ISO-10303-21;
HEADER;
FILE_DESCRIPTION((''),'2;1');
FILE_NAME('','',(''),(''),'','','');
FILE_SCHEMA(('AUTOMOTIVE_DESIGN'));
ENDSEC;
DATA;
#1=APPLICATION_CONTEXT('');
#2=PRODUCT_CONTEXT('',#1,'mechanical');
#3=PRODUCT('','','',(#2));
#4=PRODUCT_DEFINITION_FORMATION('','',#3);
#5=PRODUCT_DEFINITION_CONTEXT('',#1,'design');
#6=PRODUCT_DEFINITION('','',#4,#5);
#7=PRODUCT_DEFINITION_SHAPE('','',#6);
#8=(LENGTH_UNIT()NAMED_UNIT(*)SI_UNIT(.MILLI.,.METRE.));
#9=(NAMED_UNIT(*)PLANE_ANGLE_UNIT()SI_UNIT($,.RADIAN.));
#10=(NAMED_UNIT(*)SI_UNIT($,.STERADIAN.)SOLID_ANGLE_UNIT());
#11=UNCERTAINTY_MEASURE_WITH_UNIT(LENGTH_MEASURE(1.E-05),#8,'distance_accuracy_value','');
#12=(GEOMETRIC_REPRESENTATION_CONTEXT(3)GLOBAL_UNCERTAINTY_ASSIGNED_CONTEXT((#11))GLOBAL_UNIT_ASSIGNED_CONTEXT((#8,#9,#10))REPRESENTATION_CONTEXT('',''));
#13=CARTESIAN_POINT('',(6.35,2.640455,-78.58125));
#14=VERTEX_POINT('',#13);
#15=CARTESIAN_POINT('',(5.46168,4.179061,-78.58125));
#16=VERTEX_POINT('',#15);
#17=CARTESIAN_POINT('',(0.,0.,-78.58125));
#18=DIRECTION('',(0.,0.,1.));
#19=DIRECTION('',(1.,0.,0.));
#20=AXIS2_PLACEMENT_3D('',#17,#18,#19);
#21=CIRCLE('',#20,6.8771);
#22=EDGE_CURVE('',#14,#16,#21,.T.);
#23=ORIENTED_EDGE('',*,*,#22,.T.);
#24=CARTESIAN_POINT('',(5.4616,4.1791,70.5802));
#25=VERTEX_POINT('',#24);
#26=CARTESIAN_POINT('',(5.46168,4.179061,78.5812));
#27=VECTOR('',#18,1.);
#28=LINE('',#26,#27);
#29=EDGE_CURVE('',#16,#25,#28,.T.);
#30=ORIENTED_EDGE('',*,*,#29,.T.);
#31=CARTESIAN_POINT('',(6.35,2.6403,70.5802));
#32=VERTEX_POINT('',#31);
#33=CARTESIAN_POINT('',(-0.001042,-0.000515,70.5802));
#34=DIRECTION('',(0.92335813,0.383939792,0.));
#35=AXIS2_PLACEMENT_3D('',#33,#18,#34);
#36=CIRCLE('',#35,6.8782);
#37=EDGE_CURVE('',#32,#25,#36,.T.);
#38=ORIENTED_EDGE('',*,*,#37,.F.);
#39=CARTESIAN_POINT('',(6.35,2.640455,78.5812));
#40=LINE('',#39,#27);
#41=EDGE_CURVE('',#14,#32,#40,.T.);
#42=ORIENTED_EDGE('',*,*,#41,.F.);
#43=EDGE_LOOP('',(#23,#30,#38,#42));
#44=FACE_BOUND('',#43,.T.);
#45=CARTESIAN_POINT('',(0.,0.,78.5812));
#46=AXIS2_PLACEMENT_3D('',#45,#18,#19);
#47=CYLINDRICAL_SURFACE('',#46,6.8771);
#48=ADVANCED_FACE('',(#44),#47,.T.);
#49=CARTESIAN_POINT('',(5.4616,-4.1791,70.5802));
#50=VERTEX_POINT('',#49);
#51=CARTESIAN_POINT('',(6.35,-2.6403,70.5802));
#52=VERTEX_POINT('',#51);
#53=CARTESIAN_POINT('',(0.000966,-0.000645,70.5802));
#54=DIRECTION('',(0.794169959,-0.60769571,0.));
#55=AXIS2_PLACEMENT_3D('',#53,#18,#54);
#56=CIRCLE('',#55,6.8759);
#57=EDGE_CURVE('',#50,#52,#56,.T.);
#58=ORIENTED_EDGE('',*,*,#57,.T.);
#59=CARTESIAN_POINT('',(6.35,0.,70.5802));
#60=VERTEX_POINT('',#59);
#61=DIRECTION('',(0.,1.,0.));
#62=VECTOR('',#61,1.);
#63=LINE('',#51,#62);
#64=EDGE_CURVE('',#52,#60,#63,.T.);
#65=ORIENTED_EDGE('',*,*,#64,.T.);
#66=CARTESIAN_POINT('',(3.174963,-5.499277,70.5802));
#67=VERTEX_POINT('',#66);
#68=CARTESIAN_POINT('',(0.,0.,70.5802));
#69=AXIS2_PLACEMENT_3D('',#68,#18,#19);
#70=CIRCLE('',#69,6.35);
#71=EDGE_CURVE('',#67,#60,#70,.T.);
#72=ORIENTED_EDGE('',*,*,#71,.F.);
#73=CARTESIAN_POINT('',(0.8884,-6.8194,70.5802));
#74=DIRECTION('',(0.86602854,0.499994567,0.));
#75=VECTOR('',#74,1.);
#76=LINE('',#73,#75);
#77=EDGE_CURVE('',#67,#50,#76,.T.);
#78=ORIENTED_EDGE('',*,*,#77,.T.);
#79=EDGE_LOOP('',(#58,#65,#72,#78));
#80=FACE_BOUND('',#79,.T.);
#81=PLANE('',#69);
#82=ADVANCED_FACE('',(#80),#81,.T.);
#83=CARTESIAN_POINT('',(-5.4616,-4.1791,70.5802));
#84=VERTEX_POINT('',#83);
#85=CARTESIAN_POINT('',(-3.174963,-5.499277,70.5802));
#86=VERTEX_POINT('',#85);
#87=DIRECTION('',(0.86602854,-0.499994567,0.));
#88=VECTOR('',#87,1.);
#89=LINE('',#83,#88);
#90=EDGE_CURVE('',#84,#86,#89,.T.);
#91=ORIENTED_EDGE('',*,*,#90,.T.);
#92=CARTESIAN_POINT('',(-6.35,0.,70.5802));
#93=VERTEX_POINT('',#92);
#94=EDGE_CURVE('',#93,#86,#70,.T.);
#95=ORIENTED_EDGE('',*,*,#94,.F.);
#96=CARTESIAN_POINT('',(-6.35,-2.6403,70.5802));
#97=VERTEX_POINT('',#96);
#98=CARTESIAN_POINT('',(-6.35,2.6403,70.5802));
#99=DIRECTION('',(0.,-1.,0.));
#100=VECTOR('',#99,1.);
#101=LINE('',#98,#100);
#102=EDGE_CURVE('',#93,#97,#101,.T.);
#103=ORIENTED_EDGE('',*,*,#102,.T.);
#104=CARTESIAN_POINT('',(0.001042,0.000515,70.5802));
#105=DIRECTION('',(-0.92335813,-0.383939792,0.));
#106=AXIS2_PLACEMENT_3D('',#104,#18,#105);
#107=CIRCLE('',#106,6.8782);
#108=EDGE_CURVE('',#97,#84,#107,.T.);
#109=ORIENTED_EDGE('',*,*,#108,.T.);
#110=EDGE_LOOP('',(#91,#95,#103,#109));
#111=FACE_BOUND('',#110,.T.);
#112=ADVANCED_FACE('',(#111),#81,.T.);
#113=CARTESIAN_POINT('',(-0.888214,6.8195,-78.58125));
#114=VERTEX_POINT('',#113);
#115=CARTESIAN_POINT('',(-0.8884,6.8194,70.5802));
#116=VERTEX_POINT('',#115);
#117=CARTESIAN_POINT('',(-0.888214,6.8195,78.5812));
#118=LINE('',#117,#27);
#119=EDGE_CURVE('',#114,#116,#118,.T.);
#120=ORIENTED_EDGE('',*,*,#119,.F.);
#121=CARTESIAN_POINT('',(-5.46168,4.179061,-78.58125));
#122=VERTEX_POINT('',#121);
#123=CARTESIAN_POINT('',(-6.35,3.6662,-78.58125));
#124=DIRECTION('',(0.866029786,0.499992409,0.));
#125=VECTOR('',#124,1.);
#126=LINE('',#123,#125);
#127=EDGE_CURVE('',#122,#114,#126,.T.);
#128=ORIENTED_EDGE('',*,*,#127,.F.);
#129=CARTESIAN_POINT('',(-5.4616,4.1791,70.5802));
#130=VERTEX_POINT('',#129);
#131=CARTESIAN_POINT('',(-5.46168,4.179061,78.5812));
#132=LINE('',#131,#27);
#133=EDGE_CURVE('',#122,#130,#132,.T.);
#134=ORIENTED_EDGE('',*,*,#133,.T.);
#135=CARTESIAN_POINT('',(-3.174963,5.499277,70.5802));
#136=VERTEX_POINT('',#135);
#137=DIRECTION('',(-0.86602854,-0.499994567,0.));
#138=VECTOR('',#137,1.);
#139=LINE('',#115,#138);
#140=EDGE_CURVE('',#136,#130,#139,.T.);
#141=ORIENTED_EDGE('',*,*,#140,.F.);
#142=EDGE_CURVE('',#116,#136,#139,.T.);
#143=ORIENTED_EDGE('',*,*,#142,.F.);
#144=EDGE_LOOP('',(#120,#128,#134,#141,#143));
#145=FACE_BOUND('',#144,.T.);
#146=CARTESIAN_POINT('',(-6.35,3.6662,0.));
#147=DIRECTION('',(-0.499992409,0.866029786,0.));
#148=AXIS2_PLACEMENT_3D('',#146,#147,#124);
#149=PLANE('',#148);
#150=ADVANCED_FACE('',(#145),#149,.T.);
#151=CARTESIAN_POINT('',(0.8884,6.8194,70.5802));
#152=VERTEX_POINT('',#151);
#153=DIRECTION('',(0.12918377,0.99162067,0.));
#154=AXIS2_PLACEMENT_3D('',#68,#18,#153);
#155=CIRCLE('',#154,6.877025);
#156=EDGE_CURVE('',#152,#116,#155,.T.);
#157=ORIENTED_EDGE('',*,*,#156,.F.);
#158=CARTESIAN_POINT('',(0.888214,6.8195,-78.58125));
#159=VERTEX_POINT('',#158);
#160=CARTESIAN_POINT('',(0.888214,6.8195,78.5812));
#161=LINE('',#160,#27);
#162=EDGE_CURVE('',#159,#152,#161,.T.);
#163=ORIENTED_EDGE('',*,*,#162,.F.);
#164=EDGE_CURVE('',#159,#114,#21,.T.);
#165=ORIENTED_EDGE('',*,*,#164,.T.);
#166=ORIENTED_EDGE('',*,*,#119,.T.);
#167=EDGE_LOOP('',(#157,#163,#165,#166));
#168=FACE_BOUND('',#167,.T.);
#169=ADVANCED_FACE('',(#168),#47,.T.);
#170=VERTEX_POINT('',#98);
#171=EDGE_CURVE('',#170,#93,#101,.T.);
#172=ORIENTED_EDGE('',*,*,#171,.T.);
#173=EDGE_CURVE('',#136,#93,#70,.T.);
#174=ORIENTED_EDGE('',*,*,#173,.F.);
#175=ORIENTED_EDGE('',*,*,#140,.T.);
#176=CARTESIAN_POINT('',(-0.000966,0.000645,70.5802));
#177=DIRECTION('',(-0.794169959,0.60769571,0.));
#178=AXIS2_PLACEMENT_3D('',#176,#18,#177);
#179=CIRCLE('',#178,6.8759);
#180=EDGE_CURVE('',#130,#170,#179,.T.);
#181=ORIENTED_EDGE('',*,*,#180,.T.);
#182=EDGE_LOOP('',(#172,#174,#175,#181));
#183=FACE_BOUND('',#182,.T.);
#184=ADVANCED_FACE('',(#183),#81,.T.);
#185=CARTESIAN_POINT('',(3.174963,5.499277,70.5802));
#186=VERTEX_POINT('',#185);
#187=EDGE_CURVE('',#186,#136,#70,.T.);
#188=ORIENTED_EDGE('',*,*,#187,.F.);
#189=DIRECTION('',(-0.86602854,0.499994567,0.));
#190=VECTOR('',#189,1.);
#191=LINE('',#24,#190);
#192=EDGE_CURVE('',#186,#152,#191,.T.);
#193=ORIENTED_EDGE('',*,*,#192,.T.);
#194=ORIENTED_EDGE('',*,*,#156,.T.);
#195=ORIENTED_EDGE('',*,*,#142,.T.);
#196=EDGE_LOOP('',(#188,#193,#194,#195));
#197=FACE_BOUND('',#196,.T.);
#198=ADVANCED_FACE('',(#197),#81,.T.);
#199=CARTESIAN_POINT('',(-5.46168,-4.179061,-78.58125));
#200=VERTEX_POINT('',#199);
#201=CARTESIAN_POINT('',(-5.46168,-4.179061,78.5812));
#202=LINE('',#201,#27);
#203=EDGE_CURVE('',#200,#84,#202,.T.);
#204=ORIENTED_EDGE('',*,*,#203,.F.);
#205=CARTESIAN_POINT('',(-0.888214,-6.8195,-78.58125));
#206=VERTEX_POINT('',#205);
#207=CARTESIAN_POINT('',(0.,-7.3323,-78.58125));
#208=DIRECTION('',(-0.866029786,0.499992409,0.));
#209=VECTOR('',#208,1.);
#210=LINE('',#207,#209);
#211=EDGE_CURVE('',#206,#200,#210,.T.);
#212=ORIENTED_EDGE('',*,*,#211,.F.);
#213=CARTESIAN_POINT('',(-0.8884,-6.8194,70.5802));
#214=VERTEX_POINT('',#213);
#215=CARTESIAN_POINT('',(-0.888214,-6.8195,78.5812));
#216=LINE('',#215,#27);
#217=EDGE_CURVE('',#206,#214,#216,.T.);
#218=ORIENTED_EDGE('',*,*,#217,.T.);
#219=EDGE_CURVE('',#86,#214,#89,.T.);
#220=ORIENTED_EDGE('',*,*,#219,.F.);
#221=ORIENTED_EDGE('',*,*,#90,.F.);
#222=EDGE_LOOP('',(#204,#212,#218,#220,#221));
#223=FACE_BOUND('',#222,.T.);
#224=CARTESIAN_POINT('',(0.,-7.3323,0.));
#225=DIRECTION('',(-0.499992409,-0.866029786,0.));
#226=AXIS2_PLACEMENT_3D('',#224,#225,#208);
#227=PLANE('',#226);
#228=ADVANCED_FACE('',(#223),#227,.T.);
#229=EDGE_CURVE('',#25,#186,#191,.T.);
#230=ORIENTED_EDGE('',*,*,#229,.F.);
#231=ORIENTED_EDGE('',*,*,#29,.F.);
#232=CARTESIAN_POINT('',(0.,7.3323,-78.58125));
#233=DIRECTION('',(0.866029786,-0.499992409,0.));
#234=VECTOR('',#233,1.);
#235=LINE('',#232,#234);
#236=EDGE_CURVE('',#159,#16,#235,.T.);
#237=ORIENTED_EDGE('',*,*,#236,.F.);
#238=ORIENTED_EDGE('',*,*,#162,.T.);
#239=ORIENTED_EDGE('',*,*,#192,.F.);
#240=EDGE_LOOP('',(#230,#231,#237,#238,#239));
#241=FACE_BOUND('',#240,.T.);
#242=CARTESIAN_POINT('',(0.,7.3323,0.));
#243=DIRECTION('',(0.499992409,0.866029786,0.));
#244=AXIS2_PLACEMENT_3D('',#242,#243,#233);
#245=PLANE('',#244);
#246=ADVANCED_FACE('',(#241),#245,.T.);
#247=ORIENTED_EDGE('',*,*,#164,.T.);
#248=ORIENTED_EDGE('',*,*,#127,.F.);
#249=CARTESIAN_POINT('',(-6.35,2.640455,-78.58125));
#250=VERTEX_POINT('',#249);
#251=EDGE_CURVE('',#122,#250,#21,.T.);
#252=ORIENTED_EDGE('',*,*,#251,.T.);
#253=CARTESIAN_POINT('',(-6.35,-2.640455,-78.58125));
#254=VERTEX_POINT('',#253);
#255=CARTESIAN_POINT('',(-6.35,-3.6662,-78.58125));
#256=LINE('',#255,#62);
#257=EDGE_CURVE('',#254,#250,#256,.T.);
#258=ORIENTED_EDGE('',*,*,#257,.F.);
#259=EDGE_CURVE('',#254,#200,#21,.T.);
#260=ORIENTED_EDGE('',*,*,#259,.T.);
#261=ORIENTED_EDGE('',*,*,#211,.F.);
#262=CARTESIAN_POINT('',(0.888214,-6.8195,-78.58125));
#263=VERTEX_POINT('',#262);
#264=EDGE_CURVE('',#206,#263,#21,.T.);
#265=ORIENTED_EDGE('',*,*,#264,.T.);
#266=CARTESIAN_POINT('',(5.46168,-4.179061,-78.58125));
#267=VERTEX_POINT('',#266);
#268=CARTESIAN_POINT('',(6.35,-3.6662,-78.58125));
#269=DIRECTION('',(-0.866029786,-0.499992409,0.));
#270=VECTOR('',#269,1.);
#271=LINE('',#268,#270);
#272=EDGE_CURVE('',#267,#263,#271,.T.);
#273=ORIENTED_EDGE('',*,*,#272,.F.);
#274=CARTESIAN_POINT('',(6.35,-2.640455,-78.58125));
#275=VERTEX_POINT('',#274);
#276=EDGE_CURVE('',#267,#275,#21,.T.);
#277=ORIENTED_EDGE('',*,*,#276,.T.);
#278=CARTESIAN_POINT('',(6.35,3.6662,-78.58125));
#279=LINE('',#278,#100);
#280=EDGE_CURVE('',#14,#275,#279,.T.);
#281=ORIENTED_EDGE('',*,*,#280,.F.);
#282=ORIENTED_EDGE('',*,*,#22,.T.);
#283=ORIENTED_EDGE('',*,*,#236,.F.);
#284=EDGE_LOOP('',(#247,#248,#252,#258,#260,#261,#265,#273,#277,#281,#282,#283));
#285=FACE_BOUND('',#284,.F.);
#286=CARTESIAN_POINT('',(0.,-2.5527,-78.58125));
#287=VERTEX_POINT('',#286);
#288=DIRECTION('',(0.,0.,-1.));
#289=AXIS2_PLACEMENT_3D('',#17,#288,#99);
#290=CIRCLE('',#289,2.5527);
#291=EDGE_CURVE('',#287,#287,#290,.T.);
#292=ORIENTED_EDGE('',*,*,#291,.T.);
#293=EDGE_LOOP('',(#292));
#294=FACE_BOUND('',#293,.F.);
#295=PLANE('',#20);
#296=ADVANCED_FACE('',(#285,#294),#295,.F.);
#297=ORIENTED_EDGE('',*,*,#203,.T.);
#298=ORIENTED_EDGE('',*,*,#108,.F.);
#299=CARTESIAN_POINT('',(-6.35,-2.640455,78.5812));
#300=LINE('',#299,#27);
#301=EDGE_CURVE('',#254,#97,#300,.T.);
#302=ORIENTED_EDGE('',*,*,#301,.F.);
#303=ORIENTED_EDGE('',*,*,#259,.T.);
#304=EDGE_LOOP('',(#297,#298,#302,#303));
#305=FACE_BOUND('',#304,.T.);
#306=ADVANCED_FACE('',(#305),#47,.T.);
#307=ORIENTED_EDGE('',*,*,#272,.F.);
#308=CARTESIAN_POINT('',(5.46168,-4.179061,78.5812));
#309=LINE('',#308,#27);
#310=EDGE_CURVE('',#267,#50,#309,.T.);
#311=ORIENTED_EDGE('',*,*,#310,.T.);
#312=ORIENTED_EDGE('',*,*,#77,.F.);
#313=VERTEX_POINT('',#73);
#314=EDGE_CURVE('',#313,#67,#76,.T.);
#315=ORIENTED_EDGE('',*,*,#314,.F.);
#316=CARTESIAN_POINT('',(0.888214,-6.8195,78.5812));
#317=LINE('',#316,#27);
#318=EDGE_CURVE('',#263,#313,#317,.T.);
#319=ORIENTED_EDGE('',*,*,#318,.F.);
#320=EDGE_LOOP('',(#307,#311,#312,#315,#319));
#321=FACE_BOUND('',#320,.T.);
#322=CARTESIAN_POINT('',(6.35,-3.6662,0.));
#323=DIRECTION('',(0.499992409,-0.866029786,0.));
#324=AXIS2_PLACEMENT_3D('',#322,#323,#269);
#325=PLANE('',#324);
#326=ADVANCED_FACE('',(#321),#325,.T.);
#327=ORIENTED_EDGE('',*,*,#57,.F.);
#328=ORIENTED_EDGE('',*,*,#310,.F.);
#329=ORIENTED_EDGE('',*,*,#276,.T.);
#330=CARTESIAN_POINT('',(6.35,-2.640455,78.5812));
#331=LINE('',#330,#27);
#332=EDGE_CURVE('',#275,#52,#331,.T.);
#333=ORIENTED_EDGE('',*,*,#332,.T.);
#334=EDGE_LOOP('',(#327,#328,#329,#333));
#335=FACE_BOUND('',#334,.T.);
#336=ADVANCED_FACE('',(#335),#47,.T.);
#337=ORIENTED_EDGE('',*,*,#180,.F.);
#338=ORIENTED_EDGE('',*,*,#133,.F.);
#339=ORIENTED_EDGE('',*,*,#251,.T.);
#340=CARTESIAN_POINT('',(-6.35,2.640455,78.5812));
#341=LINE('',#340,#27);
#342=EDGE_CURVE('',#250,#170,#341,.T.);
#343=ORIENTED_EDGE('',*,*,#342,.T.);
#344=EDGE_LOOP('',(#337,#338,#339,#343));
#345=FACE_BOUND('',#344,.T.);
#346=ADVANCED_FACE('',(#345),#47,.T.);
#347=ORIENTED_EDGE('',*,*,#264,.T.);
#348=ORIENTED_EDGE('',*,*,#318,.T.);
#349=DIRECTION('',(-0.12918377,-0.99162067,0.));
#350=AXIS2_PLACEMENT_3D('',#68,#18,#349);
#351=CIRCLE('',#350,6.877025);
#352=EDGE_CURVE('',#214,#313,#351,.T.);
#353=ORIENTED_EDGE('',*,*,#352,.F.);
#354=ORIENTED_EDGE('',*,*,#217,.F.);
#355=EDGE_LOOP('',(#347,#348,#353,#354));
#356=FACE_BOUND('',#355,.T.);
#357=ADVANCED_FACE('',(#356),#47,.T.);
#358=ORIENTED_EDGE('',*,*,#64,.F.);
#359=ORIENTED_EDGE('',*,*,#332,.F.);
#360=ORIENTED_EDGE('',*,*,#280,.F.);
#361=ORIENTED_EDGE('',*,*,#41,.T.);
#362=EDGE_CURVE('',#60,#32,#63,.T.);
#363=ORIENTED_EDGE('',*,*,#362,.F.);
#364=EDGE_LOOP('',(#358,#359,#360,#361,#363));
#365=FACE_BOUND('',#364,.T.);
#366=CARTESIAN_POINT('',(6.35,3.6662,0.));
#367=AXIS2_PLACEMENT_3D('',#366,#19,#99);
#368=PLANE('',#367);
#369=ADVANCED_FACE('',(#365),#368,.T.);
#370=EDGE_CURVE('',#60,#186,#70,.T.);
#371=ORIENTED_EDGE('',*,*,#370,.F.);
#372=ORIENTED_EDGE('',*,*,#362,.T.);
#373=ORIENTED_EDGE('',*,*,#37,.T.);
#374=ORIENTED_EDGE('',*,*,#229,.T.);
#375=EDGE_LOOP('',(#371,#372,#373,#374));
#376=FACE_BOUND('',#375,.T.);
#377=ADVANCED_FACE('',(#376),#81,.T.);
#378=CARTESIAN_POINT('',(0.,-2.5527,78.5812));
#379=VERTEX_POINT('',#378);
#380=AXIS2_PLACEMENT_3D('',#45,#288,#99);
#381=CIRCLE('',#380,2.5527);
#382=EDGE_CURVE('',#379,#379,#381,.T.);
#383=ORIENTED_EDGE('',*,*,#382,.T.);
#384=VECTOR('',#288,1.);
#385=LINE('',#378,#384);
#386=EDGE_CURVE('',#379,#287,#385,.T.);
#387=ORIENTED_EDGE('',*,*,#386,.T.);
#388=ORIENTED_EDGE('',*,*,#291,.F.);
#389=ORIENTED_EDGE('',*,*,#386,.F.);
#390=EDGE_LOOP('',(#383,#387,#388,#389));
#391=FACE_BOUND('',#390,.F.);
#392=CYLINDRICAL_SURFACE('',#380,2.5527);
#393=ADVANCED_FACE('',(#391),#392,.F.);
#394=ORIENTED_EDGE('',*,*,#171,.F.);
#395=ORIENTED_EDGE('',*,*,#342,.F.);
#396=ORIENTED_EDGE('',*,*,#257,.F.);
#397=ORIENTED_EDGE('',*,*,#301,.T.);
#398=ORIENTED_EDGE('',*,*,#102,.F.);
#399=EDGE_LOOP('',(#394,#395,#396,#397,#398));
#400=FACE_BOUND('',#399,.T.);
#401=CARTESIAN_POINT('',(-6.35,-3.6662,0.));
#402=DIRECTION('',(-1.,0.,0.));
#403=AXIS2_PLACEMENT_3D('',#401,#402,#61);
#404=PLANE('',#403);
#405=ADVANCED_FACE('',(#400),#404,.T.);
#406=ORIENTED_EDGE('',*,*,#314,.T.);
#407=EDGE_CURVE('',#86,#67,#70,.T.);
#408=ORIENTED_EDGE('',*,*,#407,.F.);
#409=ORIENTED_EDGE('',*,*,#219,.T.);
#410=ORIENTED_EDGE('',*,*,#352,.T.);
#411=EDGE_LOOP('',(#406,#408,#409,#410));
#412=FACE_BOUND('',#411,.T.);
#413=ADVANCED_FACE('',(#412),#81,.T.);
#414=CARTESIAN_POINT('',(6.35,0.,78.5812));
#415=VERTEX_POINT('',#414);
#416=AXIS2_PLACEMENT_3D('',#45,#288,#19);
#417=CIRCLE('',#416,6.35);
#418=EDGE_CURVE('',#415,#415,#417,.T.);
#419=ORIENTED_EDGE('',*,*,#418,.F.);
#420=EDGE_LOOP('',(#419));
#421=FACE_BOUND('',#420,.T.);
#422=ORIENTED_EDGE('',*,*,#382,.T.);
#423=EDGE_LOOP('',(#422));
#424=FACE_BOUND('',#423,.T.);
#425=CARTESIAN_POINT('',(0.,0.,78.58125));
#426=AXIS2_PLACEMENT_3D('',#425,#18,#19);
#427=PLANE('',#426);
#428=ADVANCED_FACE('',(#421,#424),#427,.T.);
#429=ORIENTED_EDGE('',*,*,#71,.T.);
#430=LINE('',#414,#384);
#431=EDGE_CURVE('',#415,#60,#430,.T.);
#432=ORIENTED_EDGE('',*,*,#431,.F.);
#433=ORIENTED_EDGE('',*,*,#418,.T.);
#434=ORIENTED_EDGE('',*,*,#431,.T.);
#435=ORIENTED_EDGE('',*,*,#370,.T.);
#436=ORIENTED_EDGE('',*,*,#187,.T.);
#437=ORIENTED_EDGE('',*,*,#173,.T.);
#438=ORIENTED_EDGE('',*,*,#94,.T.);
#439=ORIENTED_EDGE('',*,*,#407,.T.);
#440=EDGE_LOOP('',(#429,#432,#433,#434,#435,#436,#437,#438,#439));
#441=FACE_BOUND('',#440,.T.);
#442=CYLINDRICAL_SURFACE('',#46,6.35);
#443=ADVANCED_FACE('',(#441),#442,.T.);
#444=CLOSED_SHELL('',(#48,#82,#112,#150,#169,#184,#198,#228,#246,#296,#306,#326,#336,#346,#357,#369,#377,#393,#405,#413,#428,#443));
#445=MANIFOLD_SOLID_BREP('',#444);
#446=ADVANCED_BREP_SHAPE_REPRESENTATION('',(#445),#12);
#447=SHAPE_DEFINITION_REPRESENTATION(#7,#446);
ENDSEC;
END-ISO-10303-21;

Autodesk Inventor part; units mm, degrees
ref_plane "YZ Plane" through (0, 0, 0) normal (1, 0, 0) x (0, 1, 0)
ref_plane "XZ Plane" through (0, 0, 0) normal (0, 1, 0) x (-1, 0, 0)
ref_plane "XY Plane" through (0, 0, 0) normal (0, 0, 1) x (1, 0, 0)
sketch "Sketch1" plane through (0, 0, 0) normal (0, 0, 1) x (1, 0, 0)
  line L0 (-6.35, -3.6662) -> (-6.35, 3.6662)
  line L1 (-6.35, 3.6662) -> (0, 7.3323)
  line L2 (0, 7.3323) -> (6.35, 3.6662)
  line L3 (6.35, 3.6662) -> (6.35, -3.6662)
  line L4 (6.35, -3.6662) -> (0, -7.3323)
  line L5 (0, -7.3323) -> (-6.35, -3.6662)
  point P0 (0, 0)
  point P1 (0, 0)
  dimension "Size" = 12.7
extrude "Extrusion1" add sketch "Sketch1" along normal mid plane 157.1625
sketch "Sketch3" plane through (0, 0, 78.5812) normal (0, 0, 1) x (1, 0, 0)
  line L0 (-6.35, 3.6662) -> (0, 7.3323) construction
  line L1 (0, 7.3323) -> (6.35, 3.6662) construction
  line L2 (6.35, 3.6662) -> (6.35, -3.6662) construction
  line L3 (6.35, -3.6662) -> (0, -7.3323) construction
  line L4 (0, -7.3323) -> (-6.35, -3.6662) construction
  line L5 (-6.35, -3.6662) -> (-6.35, 3.6662) construction
  point P0 (0, 0)
hole "Hole1" at (0, 0, 78.5812) direction (0, 0, -1) diameter 5.1054 end through all
sketch "Sketch4" plane through (0, 0, 78.5812) normal (0, 0, 1) x (1, 0, 0)
  circle A0 centre (0, 0) radius 2.5527 construction
  line L0 (-6.35, 3.6662) -> (0, 7.3323) construction
  line L1 (0, 7.3323) -> (6.35, 3.6662) construction
  line L2 (6.35, 3.6662) -> (6.35, -3.6662) construction
  line L3 (6.35, -3.6662) -> (0, -7.3323) construction
  line L4 (0, -7.3323) -> (-6.35, -3.6662) construction
  line L5 (-6.35, -3.6662) -> (-6.35, 3.6662) construction
  circle A1 centre (0, 0) radius 6.8771
  circle A2 centre (0, 0) radius 8.89
  dimension "thunder" = 13.7541
  dimension "d16" = 17.78
extrude "Extrusion3" cut sketch "Sketch4" against normal through all
sketch "Sketch5" plane through (0, 0, 78.5812) normal (0, 0, 1) x (1, 0, 0)
  circle A0 centre (0, 0) radius 6.35
  arc A1 (5.4616, -4.1791) -> (6.35, -2.6403) centre (0, 0) ccw projected
  line L0 (6.35, -2.6403) -> (6.35, 2.6403) projected
  arc A2 (6.35, 2.6403) -> (5.4616, 4.1791) centre (0, 0) ccw projected
  line L1 (5.4616, 4.1791) -> (0.8884, 6.8194) projected
  arc A3 (0.8884, 6.8194) -> (-0.8884, 6.8194) centre (0, 0) ccw projected
  line L2 (-0.8884, 6.8194) -> (-5.4616, 4.1791) projected
  arc A4 (-5.4616, 4.1791) -> (-6.35, 2.6403) centre (0, 0) ccw projected
  line L3 (-6.35, 2.6403) -> (-6.35, -2.6403) projected
  arc A5 (-6.35, -2.6403) -> (-5.4616, -4.1791) centre (0, 0) ccw projected
  line L4 (-5.4616, -4.1791) -> (-0.8884, -6.8194) projected
  arc A6 (-0.8884, -6.8194) -> (0.8884, -6.8194) centre (0, 0) ccw projected
  line L5 (0.8884, -6.8194) -> (5.4616, -4.1791) projected
  circle A7 centre (0, 0) radius 2.5527 construction
  point P0 (3.175, -5.4993)
  point P1 (-3.175, -5.4993)
  point P2 (-6.35, 0)
  point P3 (-3.175, 5.4993)
  point P4 (3.175, 5.4993)
  point P5 (6.35, 0)
  dimension "d19" = 12.7
extrude "Extrusion4" cut sketch "Sketch5" against normal blind 8.001 contours L0 A1 L5 A0 | A0 L1 A2 L0 | A0 L2 A3 L1 | L5 A6 L4 A0 | A0 L3 A4 L2 | L4 A5 L3 A0
equation "\"bearing\" = 25.4"
properties part number "GP5-009" material "Aluminum 6061"
